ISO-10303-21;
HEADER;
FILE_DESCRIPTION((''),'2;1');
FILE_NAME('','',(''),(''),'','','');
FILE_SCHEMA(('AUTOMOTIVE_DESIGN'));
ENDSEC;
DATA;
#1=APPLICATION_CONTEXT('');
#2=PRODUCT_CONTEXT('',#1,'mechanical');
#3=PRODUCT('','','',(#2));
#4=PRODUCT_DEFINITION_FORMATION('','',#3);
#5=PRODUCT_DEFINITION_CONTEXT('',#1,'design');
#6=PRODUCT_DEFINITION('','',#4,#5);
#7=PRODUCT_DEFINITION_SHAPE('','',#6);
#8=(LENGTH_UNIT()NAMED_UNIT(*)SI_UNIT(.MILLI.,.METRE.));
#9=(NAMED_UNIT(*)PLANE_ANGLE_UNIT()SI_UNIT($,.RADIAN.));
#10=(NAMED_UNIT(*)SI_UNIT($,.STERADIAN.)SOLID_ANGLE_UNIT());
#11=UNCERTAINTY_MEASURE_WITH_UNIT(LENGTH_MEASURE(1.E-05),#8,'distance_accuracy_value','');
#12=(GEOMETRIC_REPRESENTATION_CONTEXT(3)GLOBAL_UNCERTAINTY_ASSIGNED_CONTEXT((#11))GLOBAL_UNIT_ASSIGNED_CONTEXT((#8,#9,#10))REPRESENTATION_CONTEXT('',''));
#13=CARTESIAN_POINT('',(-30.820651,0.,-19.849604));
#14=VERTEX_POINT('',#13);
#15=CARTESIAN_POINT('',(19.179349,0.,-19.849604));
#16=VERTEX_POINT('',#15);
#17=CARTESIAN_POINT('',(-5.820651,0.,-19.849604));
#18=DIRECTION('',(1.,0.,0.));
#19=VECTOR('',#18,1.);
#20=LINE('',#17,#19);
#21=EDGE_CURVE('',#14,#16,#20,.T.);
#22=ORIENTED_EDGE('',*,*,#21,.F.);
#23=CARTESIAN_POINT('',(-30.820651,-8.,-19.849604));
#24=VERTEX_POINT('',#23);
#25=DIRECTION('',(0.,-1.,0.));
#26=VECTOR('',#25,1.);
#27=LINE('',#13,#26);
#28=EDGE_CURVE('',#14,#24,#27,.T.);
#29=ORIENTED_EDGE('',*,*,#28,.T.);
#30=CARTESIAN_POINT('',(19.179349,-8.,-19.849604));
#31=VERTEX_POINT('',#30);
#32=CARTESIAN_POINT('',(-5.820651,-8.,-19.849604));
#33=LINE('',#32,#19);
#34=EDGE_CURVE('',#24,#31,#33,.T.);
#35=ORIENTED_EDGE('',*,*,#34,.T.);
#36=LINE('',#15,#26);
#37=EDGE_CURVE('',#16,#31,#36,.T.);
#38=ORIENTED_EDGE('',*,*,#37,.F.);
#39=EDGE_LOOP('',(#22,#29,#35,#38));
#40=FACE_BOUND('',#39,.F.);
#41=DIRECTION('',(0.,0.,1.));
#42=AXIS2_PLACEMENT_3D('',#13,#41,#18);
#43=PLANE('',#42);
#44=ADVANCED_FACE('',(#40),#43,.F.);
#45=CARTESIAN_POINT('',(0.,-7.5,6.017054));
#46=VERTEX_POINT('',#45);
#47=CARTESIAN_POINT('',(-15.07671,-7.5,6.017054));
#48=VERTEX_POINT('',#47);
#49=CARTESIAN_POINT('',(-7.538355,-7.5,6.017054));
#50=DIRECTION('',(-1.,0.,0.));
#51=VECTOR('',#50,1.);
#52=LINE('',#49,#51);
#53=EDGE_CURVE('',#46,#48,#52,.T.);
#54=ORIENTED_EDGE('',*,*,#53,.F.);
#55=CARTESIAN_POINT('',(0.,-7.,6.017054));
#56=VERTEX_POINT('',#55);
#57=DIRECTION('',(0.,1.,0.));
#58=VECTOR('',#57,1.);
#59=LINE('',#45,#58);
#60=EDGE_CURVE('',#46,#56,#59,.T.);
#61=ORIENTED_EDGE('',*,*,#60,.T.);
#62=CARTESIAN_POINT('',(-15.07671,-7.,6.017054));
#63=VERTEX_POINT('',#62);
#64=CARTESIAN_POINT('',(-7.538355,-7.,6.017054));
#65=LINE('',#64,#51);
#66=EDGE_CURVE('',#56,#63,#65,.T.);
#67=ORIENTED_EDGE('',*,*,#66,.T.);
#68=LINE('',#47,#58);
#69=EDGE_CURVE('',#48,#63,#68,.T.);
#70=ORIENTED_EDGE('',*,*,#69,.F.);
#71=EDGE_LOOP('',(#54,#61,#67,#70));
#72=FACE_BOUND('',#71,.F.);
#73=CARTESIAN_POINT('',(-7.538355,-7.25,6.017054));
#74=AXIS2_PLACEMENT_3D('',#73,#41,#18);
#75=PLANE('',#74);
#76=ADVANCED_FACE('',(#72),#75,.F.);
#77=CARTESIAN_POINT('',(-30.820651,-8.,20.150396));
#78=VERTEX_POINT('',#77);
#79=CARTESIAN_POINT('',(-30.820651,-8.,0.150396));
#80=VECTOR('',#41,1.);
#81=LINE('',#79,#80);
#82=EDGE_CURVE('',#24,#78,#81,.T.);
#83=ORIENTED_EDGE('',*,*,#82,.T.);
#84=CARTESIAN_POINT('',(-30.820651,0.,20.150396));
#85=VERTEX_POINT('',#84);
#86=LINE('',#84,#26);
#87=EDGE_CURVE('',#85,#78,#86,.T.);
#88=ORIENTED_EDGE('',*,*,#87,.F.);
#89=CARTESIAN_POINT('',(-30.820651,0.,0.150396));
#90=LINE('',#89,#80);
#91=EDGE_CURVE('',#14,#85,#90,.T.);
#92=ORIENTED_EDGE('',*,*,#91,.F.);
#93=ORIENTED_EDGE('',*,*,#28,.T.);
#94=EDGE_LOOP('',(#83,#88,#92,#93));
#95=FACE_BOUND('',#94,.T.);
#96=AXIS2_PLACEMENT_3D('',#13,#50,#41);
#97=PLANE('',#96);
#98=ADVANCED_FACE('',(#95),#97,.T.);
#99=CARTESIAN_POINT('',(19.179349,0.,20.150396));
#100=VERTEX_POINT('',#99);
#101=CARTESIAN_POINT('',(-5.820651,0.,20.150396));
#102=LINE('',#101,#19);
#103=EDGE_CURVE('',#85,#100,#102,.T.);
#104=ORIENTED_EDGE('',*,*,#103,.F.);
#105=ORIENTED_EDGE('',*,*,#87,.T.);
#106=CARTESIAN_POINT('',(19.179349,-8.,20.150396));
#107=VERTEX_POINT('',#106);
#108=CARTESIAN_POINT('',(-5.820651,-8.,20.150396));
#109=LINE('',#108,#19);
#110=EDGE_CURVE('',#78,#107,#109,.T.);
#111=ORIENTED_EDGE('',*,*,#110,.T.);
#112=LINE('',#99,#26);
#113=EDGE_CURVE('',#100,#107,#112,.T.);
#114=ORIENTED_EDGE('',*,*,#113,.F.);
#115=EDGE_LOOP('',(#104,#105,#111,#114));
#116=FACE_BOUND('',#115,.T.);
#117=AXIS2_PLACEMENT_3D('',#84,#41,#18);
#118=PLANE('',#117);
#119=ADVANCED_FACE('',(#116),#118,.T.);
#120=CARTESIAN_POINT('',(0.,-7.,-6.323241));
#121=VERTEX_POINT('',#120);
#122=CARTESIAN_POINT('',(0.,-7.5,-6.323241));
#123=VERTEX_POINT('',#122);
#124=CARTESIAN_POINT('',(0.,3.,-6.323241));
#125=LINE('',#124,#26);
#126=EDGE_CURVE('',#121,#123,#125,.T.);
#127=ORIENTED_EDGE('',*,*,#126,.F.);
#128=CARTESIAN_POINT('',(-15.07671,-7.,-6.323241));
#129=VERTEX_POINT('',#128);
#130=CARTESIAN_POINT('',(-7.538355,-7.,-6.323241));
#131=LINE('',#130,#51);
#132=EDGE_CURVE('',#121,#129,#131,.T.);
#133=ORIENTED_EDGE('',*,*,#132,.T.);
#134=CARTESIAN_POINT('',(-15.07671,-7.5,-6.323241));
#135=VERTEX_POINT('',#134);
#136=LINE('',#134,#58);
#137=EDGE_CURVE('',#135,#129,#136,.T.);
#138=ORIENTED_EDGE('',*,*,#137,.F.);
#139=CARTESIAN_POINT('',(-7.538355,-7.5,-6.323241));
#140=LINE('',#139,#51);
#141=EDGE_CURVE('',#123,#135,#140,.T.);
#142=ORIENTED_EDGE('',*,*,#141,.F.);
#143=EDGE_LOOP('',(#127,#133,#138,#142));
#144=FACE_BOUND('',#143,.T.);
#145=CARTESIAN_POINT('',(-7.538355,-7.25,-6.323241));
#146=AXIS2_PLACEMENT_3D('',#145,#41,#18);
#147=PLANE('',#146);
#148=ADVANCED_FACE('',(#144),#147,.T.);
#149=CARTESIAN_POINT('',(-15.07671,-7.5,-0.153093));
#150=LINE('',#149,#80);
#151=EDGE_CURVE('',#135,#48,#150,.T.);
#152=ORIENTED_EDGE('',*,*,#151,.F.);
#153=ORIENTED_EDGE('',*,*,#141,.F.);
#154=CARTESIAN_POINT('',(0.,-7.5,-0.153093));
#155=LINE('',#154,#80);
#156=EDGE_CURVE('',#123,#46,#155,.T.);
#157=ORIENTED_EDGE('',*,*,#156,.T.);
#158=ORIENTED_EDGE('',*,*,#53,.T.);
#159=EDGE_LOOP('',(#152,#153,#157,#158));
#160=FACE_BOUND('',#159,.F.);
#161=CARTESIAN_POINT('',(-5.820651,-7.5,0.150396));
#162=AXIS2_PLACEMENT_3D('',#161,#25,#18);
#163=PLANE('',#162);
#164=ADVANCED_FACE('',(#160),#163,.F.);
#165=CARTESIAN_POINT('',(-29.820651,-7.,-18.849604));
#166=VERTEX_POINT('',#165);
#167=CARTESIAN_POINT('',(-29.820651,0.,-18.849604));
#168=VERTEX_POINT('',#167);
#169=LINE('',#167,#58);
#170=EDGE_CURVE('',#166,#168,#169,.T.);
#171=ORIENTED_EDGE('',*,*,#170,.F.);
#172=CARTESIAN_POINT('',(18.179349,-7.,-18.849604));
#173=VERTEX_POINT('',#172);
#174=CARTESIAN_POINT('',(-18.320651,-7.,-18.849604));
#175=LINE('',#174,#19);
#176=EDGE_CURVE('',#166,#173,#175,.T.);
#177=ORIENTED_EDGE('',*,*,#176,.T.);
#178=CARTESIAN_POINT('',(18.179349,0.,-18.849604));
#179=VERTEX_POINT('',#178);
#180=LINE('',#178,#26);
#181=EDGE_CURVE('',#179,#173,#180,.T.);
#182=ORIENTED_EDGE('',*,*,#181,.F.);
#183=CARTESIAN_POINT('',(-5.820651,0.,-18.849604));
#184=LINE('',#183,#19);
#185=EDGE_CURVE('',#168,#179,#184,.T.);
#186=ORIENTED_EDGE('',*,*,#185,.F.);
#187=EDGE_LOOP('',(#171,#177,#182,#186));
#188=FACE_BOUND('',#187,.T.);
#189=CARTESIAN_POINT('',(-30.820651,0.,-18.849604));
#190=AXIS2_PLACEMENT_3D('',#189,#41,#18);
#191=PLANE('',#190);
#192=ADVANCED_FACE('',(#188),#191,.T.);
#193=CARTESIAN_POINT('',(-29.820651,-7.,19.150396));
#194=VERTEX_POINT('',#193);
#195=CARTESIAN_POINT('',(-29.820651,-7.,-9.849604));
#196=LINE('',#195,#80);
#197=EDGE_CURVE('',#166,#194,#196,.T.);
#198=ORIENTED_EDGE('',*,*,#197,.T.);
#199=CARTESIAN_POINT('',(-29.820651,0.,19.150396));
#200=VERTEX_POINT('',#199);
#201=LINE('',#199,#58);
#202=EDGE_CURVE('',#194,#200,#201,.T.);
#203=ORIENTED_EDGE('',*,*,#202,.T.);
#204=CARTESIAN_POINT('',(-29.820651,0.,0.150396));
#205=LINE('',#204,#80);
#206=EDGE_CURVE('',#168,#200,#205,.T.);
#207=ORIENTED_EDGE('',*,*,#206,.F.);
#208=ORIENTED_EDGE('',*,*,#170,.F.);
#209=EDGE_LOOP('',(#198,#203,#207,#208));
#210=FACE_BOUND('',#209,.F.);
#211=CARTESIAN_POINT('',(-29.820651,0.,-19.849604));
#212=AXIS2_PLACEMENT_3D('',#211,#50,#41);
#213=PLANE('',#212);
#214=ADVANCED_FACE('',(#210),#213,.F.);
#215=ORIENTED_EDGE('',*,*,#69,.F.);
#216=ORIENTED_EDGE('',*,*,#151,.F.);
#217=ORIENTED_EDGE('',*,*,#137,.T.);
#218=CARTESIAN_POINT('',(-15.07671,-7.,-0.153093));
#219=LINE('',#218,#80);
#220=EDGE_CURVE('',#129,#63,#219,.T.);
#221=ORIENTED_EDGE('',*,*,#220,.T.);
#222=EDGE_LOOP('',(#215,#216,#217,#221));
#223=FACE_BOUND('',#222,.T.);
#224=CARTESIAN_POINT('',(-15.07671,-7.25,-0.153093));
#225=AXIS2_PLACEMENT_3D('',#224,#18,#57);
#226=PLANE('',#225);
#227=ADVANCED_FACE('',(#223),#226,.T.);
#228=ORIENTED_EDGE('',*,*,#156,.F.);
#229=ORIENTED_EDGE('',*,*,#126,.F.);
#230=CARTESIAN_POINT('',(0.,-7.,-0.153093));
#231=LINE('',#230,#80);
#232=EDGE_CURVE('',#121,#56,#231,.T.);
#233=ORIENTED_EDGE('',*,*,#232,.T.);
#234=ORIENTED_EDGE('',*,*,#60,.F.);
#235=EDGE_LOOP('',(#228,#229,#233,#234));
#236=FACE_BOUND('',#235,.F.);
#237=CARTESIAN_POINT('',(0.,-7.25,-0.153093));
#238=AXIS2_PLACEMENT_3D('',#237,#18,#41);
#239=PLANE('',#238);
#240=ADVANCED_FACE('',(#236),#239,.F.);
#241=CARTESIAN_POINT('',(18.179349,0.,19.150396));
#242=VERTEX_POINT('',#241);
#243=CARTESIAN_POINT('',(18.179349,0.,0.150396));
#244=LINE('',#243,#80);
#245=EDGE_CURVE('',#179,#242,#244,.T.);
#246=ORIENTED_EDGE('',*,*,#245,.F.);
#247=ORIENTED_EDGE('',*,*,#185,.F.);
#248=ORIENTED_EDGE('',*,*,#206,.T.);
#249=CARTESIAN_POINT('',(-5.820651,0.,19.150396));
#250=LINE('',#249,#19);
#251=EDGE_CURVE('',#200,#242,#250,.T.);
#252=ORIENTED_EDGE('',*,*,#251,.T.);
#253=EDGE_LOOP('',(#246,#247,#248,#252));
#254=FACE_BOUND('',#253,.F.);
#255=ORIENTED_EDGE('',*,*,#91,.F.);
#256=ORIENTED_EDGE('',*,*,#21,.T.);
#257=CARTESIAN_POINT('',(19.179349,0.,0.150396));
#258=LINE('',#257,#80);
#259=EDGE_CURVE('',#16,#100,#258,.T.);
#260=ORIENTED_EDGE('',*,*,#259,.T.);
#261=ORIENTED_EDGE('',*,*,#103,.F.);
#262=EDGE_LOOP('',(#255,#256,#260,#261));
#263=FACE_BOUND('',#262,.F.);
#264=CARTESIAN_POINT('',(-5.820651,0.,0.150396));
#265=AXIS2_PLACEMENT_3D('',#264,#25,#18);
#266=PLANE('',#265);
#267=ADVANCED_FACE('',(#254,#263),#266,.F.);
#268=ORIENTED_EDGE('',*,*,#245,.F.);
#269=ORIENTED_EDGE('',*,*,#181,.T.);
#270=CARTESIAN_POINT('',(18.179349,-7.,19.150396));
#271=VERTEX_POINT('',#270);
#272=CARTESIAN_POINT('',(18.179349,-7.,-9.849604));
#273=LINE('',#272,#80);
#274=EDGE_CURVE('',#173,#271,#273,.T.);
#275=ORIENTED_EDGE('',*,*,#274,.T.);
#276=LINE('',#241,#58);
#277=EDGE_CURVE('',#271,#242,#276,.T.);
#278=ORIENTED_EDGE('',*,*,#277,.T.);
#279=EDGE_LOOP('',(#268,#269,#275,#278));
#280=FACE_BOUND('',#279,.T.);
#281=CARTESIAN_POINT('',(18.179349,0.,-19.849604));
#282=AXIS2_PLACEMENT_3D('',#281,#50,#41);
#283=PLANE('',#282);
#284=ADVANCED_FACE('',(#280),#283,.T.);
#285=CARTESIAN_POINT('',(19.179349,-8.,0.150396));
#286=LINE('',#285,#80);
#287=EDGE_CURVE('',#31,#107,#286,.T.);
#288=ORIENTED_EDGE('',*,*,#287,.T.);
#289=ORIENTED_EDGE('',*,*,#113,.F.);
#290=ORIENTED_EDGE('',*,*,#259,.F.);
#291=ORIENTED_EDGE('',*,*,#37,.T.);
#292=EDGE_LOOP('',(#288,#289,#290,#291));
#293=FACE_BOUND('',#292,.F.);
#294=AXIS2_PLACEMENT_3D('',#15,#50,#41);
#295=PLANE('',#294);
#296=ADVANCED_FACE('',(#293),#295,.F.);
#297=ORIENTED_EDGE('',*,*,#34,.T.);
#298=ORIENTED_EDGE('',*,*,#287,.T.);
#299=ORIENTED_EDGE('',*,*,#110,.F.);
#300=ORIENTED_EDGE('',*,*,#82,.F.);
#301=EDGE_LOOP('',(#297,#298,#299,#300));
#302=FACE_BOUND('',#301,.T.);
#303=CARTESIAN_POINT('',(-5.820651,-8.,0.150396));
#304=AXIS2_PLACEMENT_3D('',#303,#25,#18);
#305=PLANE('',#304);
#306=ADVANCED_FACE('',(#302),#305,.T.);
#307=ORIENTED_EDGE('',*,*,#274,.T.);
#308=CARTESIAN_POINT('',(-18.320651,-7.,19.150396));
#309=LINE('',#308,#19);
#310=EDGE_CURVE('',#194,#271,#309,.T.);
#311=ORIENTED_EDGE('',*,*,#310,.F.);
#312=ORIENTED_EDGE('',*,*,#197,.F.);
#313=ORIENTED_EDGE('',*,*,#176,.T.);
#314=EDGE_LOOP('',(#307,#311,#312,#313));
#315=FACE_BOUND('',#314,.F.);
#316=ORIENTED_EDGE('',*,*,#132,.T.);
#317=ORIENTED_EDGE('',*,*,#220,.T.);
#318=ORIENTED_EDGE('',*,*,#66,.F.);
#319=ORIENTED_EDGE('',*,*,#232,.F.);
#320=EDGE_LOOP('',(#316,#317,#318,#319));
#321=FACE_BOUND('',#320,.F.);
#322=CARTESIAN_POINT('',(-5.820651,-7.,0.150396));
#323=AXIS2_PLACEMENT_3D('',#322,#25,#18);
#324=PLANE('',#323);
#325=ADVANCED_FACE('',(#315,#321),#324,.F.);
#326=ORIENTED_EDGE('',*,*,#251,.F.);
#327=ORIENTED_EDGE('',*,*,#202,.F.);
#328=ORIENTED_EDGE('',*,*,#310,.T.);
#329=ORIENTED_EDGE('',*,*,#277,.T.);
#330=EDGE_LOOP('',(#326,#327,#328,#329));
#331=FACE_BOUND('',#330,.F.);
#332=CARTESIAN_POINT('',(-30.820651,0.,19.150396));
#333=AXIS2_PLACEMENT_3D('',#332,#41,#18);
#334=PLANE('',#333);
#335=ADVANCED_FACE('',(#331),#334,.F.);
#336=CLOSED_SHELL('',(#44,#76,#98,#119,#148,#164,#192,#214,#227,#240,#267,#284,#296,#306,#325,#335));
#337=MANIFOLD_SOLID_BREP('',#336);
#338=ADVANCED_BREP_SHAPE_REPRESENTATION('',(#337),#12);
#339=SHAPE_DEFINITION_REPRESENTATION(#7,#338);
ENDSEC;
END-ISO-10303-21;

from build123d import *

# Parameters (mm, degrees)
F0_W        = 50
F0_H        = 40
F1_DEPTH    = 8
F2_T        = -1
F3_W        = 15.0767099112
F3_H        = 12.3402951285
F4_DEPTH    = 10
F5_T        = 0.5
F5_T3_DEPTH = 8
F5_T5_DEPTH = 49
F5_T7_DEPTH = 39


# Not quite as in the source:
# - a shell that OpenCascade refuses in one call is made with other operations: the cavity is built on its own and cut out


with BuildPart() as f1:
    # F0 (on Front) → F1 (new body)
    with BuildSketch(Plane.XZ):
        with Locations((-5.8206513731, 0.1503955573)):
            Rectangle(F0_W, F0_H)
    extrude(amount=F1_DEPTH)

    # F2
    f2_openings = [f1.faces().sort_by_distance(p)[0] for p in [
        (-5.820651, 0, 0.150396),
    ]]
    offset(amount=F2_T, openings=f2_openings)

    # F3 (on face) → F4 (join)
    with BuildSketch(Plane(origin=(0, -7, 0), x_dir=(-1, 0, 0), z_dir=(0, 1, 0))):
        with Locations((7.5383549556, -0.1530931331)):
            Rectangle(F3_W, F3_H)
    extrude(amount=F4_DEPTH)

    # F5: shell of thickness 0.5, made by hand


with BuildPart() as f5_core1:
    # F5_t2: copy of F1
    add(f1.part)

    # the walls: a layer under each face that stays
    f5_faces = [f5_core1.faces().sort_by_distance(p)[0] for p in [
        (-5.8206513731, -4, 20.1503955573),
        (19.1793486269, -4, 0.1503955573),
        (-30.8206513731, -4, 0.1503955573),
        (11.3668486269, 0, -19.3557772822),
        (-5.8206513731, -8, 0.1503955573),
        (-5.8206513731, -4, -19.8496044427),
        (-5.8206513731, -3.5, 19.1503955573),
        (18.1793486269, -3.5, 0.1503955573),
        (-5.8206513731, -3.5, -18.8496044427),
        (-29.8206513731, -3.5, 0.1503955573),
        (-21.8206513731, -7, -12.5162711094),
    ]]
    thicken(f5_faces, amount=-F5_T, mode=Mode.SUBTRACT)

    # F5_s4 → F5_t3 (cut)
    with BuildSketch(Plane.XZ.offset(-0.5)):
        Polygon((18.1743486269, 19.1453955573), (18.1793486269, 19.6503955573), (18.6793486269, 19.6503955573), (18.6793486269, 19.1503955573), align=None)
        Polygon((-29.8156513731, 19.1453955573), (-29.8206513731, 19.6503955573), (-30.3206513731, 19.6503955573), (-30.3206513731, 19.1503955573), align=None)
        Polygon((18.1743486269, -18.8446044427), (18.6793486269, -18.8496044427), (18.6793486269, -19.3496044427), (18.1793486269, -19.3496044427), align=None)
        Polygon((-29.8156513731, -18.8446044427), (-29.8206513731, -19.3496044427), (-30.3206513731, -19.3496044427), (-30.3206513731, -18.8496044427), align=None)
    extrude(amount=F5_T3_DEPTH, mode=Mode.SUBTRACT)

    # F5_s6 → F5_t5 (cut)
    with BuildSketch(Plane.YZ.offset(-30.3206513731)):
        Polygon((-6.995, 19.1453955573), (-7, 19.6503955573), (-7.5, 19.6503955573), (-7.5, 19.1503955573), align=None)
        Polygon((-6.995, -18.8446044427), (-7, -19.3496044427), (-7.5, -19.3496044427), (-7.5, -18.8496044427), align=None)
    extrude(amount=F5_T5_DEPTH, mode=Mode.SUBTRACT)

    # F5_s8 → F5_t7 (cut)
    with BuildSketch(Plane.XY.offset(-19.3496044427)):
        Polygon((18.1743486269, -6.995), (18.6793486269, -7), (18.6793486269, -7.5), (18.1793486269, -7.5), align=None)
        Polygon((-29.8156513731, -6.995), (-30.3206513731, -7), (-30.3206513731, -7.5), (-29.8206513731, -7.5), align=None)
    extrude(amount=F5_T7_DEPTH, mode=Mode.SUBTRACT)


with BuildPart() as f1_1:
    add(f1.part)

    # what is left inside the walls is the cavity
    f5_cavity = [f5_core1.part.solids().sort_by_distance(p)[0] for p in [
        (-7.538355, -7.495, -2.209809),
    ]]
    add(f5_cavity, mode=Mode.SUBTRACT)


solid = f1_1.part
